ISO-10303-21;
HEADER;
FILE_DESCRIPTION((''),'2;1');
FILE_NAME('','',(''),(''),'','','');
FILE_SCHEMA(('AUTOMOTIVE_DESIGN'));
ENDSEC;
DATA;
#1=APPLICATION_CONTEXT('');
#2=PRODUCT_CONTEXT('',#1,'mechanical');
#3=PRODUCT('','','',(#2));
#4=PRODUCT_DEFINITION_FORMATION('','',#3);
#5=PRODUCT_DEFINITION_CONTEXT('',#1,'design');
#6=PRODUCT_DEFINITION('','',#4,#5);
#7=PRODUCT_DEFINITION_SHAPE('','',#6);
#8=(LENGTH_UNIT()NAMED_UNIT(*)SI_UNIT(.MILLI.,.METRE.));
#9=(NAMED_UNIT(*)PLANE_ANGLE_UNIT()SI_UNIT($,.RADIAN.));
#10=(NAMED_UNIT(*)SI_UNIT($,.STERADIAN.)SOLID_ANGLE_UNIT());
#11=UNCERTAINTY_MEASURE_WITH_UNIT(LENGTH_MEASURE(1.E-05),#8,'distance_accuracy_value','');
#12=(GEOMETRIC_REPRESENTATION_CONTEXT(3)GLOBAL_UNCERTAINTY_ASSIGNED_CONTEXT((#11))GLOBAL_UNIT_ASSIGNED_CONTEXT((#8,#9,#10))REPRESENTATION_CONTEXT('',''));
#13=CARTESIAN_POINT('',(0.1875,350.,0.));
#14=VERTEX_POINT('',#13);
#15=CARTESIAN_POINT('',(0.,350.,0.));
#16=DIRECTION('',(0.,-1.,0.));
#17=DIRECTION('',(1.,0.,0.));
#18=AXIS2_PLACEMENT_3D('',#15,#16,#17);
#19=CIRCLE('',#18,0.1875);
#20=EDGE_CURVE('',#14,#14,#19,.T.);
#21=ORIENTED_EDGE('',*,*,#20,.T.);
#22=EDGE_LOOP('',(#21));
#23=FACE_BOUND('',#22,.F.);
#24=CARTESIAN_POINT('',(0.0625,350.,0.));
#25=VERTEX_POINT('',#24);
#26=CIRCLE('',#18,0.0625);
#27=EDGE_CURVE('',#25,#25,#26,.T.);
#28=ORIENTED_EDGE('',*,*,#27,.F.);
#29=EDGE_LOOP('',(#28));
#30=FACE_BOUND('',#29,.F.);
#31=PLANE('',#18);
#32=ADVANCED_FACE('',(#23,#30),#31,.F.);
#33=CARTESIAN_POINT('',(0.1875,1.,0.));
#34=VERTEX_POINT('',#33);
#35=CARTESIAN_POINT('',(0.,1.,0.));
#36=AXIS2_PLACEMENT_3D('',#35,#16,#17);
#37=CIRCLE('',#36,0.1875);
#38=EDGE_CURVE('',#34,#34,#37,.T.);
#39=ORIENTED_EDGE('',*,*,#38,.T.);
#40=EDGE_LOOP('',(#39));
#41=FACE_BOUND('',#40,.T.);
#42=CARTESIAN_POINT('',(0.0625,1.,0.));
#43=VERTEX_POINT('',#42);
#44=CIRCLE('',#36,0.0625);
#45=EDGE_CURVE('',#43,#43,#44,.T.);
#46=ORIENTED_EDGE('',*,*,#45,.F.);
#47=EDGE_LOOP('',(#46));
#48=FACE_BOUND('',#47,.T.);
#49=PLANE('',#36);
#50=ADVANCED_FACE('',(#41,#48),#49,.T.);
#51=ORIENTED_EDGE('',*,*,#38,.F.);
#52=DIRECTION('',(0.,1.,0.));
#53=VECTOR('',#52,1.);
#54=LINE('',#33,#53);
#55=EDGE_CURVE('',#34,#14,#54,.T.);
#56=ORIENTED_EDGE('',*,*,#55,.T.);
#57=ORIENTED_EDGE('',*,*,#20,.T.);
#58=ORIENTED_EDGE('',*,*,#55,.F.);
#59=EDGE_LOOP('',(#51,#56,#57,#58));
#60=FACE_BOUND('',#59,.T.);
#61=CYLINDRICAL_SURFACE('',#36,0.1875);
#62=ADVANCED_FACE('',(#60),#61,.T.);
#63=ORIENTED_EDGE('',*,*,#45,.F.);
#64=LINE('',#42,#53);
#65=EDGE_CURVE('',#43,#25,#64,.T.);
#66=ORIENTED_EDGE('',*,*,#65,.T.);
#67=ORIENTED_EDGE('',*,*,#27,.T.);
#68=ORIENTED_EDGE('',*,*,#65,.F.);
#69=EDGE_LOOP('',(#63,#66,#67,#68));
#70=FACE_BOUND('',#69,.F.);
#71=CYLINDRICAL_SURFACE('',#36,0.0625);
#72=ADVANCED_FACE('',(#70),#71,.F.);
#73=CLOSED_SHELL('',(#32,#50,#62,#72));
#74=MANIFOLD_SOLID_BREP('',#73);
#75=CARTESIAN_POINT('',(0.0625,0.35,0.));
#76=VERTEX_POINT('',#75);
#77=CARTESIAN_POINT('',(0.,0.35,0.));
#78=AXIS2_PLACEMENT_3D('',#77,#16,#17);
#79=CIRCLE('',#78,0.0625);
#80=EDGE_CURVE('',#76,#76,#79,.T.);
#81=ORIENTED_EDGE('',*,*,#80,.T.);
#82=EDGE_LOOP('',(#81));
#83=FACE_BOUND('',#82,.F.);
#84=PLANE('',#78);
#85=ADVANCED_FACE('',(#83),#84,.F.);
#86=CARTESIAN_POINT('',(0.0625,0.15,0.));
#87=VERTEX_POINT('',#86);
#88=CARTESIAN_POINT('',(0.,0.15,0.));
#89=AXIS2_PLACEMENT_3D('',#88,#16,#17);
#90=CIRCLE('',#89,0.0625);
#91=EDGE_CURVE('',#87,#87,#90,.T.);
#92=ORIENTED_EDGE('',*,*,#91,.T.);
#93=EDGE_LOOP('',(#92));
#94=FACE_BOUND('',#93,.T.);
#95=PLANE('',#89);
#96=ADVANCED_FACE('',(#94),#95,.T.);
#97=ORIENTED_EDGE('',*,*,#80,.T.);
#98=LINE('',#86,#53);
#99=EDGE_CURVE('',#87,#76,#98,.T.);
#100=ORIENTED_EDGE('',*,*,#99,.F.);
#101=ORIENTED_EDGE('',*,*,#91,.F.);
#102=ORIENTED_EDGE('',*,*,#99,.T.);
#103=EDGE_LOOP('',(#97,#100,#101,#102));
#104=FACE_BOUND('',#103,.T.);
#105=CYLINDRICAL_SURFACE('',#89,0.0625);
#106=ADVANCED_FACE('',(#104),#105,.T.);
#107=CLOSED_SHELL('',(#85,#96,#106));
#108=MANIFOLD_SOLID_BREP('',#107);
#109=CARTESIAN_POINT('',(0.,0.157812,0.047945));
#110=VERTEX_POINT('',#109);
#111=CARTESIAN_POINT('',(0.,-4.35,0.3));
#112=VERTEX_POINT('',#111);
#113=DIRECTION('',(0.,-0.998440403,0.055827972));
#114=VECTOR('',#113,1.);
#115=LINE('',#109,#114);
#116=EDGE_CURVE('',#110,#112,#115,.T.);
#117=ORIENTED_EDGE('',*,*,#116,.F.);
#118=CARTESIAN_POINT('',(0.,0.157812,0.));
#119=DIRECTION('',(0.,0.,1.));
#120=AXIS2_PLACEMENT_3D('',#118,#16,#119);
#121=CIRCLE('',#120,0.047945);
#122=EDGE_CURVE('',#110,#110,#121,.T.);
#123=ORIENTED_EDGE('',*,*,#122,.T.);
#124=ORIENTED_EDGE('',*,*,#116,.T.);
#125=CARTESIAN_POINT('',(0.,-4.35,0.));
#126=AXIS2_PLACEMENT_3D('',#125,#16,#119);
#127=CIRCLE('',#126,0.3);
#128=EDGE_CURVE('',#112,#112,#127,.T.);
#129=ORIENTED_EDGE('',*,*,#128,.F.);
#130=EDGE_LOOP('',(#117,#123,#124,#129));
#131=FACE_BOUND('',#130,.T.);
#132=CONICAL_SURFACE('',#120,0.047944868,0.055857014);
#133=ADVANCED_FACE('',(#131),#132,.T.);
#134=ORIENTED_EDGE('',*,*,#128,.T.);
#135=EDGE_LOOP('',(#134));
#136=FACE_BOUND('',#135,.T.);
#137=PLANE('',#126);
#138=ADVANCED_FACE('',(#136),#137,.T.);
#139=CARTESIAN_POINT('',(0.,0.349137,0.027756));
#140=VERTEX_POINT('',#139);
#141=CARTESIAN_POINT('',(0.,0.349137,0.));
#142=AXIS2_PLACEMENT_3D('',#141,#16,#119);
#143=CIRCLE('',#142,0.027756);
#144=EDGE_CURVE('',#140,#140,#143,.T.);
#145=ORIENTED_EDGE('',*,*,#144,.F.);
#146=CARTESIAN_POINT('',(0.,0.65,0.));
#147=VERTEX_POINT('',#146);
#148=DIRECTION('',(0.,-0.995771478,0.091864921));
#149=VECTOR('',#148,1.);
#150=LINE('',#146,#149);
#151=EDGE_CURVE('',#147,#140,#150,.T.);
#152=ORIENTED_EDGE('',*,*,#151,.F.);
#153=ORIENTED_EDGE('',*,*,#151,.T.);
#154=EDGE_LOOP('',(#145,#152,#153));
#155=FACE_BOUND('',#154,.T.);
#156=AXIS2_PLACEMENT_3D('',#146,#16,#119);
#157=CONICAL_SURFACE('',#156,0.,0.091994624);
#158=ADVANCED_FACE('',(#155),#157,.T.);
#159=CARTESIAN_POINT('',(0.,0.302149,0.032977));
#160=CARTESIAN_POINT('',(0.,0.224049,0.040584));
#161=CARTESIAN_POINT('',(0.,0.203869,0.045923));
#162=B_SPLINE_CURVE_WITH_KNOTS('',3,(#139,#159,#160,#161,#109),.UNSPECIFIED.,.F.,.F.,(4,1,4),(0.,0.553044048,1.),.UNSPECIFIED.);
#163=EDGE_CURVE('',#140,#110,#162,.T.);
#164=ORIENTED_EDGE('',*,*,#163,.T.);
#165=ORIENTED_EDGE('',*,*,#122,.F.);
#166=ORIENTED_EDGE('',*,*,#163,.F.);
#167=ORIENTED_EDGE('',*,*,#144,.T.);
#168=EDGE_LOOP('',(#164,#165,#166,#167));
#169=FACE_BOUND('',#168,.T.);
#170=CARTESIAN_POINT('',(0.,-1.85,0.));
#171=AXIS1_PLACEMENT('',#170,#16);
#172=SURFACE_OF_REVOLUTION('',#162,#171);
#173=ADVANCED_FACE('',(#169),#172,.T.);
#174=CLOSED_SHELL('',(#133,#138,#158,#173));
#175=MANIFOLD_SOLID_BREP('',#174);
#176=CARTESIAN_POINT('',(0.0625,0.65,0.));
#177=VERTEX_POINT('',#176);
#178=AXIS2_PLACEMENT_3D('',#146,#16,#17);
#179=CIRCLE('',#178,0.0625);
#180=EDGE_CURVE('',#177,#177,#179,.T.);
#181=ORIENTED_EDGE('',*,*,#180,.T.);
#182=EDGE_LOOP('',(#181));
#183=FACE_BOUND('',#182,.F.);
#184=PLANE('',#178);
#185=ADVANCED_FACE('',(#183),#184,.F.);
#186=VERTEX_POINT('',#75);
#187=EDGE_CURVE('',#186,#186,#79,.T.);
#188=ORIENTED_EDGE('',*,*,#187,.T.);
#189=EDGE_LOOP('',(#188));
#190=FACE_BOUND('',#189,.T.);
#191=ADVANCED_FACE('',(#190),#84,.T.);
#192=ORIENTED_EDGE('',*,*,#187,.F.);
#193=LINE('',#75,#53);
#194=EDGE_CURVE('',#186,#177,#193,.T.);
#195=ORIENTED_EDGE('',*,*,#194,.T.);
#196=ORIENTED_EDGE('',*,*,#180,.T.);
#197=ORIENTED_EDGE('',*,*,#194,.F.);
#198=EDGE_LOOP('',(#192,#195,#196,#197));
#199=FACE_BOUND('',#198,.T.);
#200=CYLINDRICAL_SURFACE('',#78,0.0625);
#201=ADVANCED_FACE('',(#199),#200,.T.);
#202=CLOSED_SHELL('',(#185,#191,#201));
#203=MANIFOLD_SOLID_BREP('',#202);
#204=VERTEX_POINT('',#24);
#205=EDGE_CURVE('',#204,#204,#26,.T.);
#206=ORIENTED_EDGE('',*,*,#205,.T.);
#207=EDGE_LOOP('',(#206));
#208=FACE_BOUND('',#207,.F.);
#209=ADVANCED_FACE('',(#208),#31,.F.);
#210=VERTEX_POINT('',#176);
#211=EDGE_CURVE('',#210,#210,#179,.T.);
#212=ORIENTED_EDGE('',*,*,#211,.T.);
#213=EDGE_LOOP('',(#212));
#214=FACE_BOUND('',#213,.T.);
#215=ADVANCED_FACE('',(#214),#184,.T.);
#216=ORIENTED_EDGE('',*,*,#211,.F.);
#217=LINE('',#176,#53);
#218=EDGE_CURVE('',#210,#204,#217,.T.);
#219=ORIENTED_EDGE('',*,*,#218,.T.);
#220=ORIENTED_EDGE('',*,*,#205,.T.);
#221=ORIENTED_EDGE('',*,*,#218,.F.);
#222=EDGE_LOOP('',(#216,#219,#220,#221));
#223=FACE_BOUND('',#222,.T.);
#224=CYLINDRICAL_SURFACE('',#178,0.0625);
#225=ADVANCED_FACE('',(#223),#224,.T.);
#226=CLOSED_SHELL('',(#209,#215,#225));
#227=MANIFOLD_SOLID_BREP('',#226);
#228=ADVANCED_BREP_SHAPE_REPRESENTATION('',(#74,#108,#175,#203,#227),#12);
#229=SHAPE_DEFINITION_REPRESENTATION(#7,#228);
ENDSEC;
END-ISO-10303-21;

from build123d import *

# Parameters (mm, degrees)
F2_R      = 0.0625
F7_DEPTH  = 0.2
F4_R      = 0.0625
F8_DEPTH  = 0.3
F6_R      = 0.0625
F9_DEPTH  = 349.35
F11_R     = 0.1875
F11_R_2   = 0.0625
F12_DEPTH = 349


# Not quite as in the source:
# - a feature names something its author has since deleted; it is built from what else it names


with BuildPart() as f7:
    # F2 (on offset) → F7 (new body)
    with BuildSketch(Plane.XZ.offset(-0.15)):
        Circle(F2_R)
    extrude(amount=-F7_DEPTH)


with BuildPart() as f8:
    # F4 (on offset) → F8 (new body)
    with BuildSketch(Plane.XZ.offset(-0.35)):
        Circle(F4_R)
    extrude(amount=-F8_DEPTH)


with BuildPart() as f9:
    # F6 (on offset) → F9 (new body)
    with BuildSketch(Plane.XZ.offset(-0.65)):
        Circle(F6_R)
    extrude(amount=-F9_DEPTH)


with BuildPart() as f12:
    # F11 (on offset) → F12 (new body)
    with BuildSketch(Plane.XZ.offset(-1)):
        Circle(F11_R)
        Circle(F11_R_2, mode=Mode.SUBTRACT)
    extrude(amount=-F12_DEPTH)


with BuildPart() as f14:
    # F13 (on Right) → F14 (revolve)
    with BuildSketch(Plane.YZ):
        with BuildLine():
            Line((-4.35, 0), (0.65, 0))
            Line((0.65, 0), (0.3491367389, 0.0277561471))
            add(Edge.make_bspline(
                [(0.3491367389, 0.0277561471), (0.3021492431, 0.0329769782), (0.2240491251, 0.0405844807), (0.2038690727, 0.0459227485), (0.1578124079, 0.0479448684)],
                knots=[0, 0, 0, 0, 0.5530440475, 1, 1, 1, 1], degree=3))
            Line((0.1578124079, 0.0479448684), (-4.35, 0.3))
            Line((-4.35, 0.3), (-4.35, 0))
        make_face()
    revolve(axis=Axis((0, -1.85, 0), (0, -1, 0)))


solid = Compound([f7.part, f8.part, f9.part, f12.part, f14.part])
